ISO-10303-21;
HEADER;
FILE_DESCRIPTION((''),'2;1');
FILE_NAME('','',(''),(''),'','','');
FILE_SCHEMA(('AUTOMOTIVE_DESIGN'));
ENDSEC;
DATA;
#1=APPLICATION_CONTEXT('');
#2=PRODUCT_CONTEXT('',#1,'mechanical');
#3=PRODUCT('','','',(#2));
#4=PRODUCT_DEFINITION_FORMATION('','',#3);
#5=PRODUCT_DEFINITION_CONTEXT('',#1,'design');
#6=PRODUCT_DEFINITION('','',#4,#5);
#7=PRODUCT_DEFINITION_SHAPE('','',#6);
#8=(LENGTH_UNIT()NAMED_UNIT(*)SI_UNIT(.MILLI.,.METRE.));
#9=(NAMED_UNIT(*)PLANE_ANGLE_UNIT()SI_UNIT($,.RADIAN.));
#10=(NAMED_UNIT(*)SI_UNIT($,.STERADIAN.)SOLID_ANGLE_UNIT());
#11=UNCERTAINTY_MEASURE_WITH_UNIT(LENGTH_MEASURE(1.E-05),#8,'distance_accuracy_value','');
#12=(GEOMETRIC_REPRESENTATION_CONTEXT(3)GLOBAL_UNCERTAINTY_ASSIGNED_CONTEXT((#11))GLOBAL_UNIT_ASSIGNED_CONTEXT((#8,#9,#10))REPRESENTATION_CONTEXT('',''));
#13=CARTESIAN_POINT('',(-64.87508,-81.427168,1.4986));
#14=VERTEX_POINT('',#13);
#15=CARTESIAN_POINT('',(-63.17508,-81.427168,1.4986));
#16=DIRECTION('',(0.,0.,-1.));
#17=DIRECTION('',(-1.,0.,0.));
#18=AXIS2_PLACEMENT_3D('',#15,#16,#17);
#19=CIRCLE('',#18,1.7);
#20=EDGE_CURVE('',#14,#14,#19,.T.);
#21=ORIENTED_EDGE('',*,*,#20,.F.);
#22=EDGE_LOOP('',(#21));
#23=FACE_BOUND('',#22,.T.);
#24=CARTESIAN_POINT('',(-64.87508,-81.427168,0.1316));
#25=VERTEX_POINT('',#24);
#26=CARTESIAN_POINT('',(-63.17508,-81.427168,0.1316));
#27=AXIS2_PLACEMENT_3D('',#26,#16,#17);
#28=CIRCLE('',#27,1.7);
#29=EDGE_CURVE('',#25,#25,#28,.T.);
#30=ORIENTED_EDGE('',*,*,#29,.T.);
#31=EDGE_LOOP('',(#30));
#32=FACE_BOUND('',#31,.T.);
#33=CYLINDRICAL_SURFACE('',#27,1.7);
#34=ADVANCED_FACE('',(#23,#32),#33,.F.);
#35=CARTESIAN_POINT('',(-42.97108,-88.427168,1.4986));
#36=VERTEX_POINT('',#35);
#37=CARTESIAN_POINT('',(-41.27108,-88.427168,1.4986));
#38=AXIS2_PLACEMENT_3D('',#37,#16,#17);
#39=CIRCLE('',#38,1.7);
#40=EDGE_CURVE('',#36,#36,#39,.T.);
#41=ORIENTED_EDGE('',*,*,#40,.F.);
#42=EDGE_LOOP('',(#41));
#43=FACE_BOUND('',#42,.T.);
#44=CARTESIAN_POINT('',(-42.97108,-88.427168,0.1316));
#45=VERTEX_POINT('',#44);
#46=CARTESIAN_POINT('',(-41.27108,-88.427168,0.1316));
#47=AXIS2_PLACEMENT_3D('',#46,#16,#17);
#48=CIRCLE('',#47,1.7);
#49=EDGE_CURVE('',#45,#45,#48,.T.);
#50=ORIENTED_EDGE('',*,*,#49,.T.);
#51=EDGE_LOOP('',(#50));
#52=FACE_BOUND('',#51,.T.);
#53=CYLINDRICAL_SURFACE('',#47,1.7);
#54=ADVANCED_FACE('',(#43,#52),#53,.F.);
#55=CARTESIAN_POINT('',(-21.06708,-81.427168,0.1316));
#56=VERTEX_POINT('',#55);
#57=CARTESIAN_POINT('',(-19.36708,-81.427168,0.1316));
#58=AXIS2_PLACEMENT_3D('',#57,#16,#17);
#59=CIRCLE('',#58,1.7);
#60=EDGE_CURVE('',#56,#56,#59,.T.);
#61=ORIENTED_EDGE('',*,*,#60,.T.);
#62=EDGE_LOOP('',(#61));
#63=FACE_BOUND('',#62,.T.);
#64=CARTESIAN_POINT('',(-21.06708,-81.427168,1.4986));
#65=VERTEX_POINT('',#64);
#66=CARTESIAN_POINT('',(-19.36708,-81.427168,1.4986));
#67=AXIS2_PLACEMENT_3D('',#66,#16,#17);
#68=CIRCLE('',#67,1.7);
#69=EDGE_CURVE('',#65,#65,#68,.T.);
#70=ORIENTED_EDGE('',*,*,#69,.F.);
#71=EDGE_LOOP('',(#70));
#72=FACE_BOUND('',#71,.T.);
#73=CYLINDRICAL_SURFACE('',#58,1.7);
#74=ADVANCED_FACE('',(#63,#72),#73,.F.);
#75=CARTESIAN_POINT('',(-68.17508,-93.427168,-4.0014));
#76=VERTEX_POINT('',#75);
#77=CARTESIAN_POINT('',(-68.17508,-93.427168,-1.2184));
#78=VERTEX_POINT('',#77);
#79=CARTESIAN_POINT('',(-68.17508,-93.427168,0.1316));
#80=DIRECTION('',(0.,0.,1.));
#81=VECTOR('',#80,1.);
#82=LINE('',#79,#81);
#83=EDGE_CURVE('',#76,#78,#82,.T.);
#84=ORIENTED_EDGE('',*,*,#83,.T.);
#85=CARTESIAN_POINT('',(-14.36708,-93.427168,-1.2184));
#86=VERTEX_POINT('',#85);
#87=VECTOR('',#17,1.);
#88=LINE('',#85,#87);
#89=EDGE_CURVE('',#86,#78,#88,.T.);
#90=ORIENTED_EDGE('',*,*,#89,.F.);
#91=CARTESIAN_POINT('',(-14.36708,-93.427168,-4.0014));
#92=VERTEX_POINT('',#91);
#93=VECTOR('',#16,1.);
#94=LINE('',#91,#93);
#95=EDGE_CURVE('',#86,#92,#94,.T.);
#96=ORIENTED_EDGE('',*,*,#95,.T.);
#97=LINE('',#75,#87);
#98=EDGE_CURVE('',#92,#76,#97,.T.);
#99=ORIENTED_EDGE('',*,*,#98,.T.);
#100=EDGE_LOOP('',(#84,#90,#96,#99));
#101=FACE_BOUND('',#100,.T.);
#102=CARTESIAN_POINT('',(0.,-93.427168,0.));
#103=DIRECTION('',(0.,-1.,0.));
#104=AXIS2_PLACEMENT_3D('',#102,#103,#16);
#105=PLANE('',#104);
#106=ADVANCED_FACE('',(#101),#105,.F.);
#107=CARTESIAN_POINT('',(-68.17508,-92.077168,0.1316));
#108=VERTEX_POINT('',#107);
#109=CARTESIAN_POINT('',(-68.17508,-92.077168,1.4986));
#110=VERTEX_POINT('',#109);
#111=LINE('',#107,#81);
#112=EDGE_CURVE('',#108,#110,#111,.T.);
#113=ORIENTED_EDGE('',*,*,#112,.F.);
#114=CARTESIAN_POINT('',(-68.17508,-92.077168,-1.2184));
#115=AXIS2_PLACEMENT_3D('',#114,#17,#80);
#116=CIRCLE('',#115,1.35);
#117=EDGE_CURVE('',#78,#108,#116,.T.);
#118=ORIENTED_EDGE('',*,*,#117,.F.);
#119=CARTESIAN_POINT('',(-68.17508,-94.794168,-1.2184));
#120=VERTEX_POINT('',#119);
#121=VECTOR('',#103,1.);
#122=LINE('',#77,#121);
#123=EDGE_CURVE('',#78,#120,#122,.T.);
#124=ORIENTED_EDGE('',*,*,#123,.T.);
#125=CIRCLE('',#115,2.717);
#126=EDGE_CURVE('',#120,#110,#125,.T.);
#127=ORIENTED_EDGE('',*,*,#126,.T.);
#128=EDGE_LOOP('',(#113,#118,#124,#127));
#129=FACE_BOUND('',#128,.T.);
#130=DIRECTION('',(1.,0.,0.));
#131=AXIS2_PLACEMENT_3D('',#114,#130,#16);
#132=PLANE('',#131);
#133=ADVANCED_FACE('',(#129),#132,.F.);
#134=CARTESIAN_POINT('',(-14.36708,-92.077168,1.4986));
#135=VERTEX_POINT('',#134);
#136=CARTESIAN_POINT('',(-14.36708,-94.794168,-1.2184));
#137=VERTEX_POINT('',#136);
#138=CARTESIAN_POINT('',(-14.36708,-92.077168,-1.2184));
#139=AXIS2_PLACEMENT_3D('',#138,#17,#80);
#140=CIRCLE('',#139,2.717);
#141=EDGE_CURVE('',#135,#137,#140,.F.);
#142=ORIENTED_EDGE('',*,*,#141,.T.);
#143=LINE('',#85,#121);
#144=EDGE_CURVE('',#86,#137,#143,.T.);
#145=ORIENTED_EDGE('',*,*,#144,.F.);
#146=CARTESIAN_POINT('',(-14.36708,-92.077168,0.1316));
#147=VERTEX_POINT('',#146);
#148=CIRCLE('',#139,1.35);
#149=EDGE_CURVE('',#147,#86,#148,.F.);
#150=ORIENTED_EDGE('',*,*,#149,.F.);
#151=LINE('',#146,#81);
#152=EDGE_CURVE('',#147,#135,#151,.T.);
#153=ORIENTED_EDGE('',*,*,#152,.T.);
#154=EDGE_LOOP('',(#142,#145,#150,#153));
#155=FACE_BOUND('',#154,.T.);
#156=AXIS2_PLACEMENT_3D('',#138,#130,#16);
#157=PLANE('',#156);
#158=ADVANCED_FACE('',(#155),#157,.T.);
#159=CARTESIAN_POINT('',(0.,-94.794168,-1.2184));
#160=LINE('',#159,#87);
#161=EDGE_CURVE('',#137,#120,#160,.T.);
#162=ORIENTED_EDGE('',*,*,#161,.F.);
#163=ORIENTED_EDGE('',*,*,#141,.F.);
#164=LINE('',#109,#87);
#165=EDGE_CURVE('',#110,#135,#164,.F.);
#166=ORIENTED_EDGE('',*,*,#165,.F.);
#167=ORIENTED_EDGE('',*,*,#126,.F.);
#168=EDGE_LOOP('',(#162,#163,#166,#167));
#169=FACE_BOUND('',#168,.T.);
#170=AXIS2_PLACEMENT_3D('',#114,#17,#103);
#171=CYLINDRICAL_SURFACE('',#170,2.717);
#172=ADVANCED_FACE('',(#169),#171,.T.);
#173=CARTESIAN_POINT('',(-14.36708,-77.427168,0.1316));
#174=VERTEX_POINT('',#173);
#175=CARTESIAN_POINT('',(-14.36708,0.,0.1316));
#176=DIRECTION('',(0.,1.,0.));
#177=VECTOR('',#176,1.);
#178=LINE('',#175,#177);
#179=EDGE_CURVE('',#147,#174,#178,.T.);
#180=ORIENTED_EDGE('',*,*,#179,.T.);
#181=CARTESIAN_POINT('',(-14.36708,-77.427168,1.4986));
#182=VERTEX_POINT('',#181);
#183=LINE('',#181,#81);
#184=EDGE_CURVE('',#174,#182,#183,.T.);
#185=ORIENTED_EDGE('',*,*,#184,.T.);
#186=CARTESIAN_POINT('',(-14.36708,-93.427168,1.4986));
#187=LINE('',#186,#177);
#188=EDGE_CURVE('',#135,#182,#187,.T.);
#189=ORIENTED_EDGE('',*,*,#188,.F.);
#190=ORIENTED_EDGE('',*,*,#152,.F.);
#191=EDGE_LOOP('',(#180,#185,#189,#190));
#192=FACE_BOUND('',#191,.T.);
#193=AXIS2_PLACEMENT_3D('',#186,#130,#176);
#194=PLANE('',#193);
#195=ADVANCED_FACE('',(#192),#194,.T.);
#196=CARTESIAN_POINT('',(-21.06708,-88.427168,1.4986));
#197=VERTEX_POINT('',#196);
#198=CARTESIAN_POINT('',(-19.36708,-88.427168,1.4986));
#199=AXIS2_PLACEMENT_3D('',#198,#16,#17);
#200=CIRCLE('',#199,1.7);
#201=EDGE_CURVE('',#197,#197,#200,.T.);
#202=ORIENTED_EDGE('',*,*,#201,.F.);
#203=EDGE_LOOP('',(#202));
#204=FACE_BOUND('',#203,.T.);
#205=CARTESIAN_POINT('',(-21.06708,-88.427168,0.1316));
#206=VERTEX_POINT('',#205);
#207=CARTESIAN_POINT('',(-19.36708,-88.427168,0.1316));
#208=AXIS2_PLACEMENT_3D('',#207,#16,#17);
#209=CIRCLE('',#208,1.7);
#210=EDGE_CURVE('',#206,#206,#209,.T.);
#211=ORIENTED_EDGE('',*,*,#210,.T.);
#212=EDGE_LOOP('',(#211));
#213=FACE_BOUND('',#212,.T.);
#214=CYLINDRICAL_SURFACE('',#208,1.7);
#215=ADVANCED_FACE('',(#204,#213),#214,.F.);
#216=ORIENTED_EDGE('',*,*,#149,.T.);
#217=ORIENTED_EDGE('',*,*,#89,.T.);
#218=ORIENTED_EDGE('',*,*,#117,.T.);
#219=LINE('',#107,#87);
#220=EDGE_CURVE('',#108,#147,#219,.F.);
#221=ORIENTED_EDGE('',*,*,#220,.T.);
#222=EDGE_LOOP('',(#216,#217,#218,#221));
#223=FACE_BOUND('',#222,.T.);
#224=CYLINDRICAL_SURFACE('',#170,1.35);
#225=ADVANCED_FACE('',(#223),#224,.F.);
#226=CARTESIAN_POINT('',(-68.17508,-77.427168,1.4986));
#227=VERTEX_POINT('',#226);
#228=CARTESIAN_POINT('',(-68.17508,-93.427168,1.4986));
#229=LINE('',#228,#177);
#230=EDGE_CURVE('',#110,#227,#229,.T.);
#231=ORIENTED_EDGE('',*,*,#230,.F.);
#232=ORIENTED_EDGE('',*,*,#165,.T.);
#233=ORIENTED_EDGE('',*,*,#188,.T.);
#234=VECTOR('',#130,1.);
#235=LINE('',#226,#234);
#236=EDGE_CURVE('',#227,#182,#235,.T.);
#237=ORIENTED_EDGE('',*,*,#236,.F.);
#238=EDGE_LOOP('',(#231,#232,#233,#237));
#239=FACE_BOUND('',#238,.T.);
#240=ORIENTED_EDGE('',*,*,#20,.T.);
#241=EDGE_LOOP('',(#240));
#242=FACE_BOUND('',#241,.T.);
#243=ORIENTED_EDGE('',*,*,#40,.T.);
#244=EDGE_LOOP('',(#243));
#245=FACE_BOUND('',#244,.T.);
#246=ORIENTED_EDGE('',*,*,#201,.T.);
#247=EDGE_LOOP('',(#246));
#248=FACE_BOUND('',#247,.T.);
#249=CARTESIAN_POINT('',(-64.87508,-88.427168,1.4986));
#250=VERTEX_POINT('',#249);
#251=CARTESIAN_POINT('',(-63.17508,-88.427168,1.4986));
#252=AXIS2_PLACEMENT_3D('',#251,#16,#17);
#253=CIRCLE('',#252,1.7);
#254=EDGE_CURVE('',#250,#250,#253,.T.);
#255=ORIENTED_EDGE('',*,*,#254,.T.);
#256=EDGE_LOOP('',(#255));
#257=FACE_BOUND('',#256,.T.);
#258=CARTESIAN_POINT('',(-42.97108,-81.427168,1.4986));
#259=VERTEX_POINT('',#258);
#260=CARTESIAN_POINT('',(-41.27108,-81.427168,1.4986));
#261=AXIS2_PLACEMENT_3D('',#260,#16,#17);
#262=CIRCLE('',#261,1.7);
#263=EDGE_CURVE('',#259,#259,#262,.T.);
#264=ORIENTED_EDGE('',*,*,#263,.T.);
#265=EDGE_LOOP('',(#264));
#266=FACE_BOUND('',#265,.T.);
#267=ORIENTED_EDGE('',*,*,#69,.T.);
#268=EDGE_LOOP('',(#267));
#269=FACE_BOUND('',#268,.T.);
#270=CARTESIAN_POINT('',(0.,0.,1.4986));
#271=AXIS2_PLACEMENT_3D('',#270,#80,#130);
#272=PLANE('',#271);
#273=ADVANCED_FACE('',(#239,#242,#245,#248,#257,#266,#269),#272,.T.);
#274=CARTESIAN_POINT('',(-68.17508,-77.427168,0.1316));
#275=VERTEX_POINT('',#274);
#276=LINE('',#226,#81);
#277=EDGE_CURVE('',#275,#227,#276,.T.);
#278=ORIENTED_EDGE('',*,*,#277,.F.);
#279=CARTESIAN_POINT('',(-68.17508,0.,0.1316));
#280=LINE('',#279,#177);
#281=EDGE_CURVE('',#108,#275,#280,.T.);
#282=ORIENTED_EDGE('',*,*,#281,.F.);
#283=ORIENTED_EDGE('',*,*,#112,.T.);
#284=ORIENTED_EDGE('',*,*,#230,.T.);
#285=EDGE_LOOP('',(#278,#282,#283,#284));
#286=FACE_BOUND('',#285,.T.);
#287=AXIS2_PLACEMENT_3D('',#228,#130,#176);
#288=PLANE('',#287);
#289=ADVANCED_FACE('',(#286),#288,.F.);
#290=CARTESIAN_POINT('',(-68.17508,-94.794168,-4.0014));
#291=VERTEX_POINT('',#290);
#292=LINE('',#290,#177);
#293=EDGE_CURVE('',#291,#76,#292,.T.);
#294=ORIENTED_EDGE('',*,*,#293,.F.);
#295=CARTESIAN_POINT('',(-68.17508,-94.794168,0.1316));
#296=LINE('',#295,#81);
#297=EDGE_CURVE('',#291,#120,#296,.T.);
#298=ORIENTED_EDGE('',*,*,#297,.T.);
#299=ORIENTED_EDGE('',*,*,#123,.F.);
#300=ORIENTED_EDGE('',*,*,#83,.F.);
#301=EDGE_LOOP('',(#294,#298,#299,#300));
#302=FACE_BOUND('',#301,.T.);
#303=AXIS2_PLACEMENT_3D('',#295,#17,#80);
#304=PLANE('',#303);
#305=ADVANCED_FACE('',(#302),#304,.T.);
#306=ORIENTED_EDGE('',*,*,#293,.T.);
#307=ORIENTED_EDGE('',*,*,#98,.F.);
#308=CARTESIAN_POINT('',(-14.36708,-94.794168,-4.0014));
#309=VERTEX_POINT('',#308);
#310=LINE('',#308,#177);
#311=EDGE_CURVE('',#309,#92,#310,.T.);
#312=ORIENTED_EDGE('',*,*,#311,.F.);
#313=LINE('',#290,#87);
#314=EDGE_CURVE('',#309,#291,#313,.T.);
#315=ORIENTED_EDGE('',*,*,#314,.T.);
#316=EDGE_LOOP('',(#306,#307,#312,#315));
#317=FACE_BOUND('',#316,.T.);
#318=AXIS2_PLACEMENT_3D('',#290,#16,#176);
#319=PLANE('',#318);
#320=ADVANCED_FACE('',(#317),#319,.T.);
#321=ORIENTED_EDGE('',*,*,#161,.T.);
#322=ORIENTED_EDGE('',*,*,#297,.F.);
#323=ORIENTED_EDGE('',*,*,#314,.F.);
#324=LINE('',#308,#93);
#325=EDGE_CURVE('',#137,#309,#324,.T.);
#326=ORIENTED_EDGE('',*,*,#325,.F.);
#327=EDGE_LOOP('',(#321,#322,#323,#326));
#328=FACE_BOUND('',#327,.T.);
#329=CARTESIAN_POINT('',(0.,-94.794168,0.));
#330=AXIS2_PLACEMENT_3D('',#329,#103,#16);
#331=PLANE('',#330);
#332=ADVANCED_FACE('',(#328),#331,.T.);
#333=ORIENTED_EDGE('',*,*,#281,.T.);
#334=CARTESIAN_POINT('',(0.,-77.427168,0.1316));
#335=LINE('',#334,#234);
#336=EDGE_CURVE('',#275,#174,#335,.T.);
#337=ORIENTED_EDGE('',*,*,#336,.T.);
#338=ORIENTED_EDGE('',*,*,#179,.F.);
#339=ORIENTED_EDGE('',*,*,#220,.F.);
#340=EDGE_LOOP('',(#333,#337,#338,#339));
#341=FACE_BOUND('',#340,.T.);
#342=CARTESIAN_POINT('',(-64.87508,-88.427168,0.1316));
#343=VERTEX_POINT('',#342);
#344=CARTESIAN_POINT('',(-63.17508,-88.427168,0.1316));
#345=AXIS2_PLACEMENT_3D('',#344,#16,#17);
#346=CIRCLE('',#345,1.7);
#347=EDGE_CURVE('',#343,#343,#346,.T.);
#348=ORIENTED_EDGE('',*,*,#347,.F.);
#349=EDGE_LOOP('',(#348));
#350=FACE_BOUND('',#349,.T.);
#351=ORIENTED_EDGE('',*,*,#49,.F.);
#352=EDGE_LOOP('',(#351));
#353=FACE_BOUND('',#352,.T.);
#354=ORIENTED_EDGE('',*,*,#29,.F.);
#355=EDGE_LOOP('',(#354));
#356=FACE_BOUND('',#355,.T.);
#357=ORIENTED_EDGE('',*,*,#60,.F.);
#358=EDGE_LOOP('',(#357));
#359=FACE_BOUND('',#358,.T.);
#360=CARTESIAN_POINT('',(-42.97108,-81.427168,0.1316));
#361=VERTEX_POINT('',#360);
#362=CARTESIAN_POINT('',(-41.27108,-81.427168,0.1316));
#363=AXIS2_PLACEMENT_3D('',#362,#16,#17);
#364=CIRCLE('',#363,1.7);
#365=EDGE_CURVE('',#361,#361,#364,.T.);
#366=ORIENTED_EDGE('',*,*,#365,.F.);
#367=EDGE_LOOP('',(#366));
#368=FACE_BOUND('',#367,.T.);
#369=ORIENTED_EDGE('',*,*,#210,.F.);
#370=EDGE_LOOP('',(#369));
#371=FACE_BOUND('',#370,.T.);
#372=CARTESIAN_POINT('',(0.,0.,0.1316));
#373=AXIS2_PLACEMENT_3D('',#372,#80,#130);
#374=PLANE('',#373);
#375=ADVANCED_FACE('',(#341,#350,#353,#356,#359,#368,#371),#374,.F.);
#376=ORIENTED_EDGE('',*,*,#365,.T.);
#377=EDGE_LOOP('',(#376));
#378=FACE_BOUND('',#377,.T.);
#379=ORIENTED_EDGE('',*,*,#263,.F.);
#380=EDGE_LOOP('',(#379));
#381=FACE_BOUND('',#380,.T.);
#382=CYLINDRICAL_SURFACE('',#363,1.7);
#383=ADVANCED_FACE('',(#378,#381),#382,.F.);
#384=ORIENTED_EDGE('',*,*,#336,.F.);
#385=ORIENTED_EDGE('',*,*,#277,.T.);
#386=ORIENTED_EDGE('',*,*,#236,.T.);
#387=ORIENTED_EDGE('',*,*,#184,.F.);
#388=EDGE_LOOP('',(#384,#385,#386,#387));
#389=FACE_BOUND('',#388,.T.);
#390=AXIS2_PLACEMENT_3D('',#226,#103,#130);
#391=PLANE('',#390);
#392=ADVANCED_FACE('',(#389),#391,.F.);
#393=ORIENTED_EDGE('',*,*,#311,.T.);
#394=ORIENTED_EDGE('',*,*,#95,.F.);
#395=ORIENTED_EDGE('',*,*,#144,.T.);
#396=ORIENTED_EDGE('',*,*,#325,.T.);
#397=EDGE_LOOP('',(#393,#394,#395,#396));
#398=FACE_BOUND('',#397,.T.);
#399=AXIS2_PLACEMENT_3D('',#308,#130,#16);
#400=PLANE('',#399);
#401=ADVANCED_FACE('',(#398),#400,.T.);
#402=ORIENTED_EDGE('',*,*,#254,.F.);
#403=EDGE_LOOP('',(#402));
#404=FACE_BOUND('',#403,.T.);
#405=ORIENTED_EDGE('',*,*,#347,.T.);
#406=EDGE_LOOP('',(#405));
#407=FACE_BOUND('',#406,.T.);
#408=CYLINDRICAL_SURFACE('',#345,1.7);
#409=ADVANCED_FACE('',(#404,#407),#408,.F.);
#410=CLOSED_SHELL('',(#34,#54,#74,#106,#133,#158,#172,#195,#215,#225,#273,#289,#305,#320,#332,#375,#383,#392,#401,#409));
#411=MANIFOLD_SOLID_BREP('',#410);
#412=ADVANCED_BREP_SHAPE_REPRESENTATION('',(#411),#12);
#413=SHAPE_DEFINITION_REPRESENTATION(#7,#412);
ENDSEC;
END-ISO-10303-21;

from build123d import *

# Parameters (mm, degrees)
SKETCH1_W                    = 53.808
SKETCH1_H                    = 16
BOSS_EXTRUDE1_DEPTH          = 1.4986
CONVERT_SOLID1_OUTLINE_W     = 53.808
CONVERT_SOLID1_OUTLINE_H     = 16
CONVERT_SOLID1_DEPTH         = 0.1316
EDGE_FLANGE1_STRIP_W         = 8.168
EDGE_FLANGE1_STRIP_H         = 1.367
EDGE_FLANGE1_STRIP_CUT_DEPTH = 53.808
EDGE_FLANGE1_DEPTH           = 53.808
M3_CLEARANCE_HOLE1_D         = 3.4


# Read off the part's stored shape, not the designer's step: Convert-Solid1
# Sheet-metal steps are written as plain solids
with BuildPart() as part:
    # Sketch1 → Boss-Extrude1 (new body)
    with BuildSketch(Plane.XY):
        with Locations((-41.271079995, -85.427168175)):
            Rectangle(SKETCH1_W, SKETCH1_H)
    extrude(amount=BOSS_EXTRUDE1_DEPTH)

    # Convert-Solid1 outline → Convert-Solid1 (cut)
    with BuildSketch(Plane.XY):
        with Locations((-41.271079995, -85.427168175)):
            Rectangle(CONVERT_SOLID1_OUTLINE_W, CONVERT_SOLID1_OUTLINE_H)
    extrude(amount=CONVERT_SOLID1_DEPTH, mode=Mode.SUBTRACT)

    # Edge-Flange1 strip (across the edge) → Edge-Flange1 strip cut (cut)
    with BuildSketch(Plane(origin=(-14.367079995, -93.427168175, 0.1316), x_dir=(0, 1, 0), z_dir=(-1, 0, 0))):
        with Locations((-2.734, -0.6835)):
            Rectangle(EDGE_FLANGE1_STRIP_W, EDGE_FLANGE1_STRIP_H)
    extrude(amount=EDGE_FLANGE1_STRIP_CUT_DEPTH, mode=Mode.SUBTRACT)

    # Edge-Flange1 section (across the edge) → Edge-Flange1 (add)
    with BuildSketch(Plane(origin=(-14.367079995, -93.427168175, 0.1316), x_dir=(0, 1, 0), z_dir=(-1, 0, 0))):
        with BuildLine():
            Line((-1.367, 1.35), (-1.367, 4.133))
            Line((-1.367, 4.133), (0, 4.133))
            Line((0, 4.133), (0, 1.35))
            ThreePointArc((0, 1.35), (0.395405845, 0.395405845), (1.35, 0))
            Line((1.35, 0), (1.35, -1.367))
            ThreePointArc((1.35, -1.367), (-0.571209124, -0.571209124), (-1.367, 1.35))
        make_face()
    extrude(amount=EDGE_FLANGE1_DEPTH)

    # M3 Clearance Hole1 (through all)
    with Locations(Plane(origin=(0, 0, 0.1316), x_dir=(-1, 0, 0), z_dir=(0, 0, -1))):
        with Locations((19.367079995, -81.427168175), (19.367079995, -88.427168175), (63.175079995, -88.427168175), (63.175079995, -81.427168175), (41.271079995, -88.427168175), (41.271079995, -81.427168175)):
            Hole(M3_CLEARANCE_HOLE1_D / 2)


solid = part.part
